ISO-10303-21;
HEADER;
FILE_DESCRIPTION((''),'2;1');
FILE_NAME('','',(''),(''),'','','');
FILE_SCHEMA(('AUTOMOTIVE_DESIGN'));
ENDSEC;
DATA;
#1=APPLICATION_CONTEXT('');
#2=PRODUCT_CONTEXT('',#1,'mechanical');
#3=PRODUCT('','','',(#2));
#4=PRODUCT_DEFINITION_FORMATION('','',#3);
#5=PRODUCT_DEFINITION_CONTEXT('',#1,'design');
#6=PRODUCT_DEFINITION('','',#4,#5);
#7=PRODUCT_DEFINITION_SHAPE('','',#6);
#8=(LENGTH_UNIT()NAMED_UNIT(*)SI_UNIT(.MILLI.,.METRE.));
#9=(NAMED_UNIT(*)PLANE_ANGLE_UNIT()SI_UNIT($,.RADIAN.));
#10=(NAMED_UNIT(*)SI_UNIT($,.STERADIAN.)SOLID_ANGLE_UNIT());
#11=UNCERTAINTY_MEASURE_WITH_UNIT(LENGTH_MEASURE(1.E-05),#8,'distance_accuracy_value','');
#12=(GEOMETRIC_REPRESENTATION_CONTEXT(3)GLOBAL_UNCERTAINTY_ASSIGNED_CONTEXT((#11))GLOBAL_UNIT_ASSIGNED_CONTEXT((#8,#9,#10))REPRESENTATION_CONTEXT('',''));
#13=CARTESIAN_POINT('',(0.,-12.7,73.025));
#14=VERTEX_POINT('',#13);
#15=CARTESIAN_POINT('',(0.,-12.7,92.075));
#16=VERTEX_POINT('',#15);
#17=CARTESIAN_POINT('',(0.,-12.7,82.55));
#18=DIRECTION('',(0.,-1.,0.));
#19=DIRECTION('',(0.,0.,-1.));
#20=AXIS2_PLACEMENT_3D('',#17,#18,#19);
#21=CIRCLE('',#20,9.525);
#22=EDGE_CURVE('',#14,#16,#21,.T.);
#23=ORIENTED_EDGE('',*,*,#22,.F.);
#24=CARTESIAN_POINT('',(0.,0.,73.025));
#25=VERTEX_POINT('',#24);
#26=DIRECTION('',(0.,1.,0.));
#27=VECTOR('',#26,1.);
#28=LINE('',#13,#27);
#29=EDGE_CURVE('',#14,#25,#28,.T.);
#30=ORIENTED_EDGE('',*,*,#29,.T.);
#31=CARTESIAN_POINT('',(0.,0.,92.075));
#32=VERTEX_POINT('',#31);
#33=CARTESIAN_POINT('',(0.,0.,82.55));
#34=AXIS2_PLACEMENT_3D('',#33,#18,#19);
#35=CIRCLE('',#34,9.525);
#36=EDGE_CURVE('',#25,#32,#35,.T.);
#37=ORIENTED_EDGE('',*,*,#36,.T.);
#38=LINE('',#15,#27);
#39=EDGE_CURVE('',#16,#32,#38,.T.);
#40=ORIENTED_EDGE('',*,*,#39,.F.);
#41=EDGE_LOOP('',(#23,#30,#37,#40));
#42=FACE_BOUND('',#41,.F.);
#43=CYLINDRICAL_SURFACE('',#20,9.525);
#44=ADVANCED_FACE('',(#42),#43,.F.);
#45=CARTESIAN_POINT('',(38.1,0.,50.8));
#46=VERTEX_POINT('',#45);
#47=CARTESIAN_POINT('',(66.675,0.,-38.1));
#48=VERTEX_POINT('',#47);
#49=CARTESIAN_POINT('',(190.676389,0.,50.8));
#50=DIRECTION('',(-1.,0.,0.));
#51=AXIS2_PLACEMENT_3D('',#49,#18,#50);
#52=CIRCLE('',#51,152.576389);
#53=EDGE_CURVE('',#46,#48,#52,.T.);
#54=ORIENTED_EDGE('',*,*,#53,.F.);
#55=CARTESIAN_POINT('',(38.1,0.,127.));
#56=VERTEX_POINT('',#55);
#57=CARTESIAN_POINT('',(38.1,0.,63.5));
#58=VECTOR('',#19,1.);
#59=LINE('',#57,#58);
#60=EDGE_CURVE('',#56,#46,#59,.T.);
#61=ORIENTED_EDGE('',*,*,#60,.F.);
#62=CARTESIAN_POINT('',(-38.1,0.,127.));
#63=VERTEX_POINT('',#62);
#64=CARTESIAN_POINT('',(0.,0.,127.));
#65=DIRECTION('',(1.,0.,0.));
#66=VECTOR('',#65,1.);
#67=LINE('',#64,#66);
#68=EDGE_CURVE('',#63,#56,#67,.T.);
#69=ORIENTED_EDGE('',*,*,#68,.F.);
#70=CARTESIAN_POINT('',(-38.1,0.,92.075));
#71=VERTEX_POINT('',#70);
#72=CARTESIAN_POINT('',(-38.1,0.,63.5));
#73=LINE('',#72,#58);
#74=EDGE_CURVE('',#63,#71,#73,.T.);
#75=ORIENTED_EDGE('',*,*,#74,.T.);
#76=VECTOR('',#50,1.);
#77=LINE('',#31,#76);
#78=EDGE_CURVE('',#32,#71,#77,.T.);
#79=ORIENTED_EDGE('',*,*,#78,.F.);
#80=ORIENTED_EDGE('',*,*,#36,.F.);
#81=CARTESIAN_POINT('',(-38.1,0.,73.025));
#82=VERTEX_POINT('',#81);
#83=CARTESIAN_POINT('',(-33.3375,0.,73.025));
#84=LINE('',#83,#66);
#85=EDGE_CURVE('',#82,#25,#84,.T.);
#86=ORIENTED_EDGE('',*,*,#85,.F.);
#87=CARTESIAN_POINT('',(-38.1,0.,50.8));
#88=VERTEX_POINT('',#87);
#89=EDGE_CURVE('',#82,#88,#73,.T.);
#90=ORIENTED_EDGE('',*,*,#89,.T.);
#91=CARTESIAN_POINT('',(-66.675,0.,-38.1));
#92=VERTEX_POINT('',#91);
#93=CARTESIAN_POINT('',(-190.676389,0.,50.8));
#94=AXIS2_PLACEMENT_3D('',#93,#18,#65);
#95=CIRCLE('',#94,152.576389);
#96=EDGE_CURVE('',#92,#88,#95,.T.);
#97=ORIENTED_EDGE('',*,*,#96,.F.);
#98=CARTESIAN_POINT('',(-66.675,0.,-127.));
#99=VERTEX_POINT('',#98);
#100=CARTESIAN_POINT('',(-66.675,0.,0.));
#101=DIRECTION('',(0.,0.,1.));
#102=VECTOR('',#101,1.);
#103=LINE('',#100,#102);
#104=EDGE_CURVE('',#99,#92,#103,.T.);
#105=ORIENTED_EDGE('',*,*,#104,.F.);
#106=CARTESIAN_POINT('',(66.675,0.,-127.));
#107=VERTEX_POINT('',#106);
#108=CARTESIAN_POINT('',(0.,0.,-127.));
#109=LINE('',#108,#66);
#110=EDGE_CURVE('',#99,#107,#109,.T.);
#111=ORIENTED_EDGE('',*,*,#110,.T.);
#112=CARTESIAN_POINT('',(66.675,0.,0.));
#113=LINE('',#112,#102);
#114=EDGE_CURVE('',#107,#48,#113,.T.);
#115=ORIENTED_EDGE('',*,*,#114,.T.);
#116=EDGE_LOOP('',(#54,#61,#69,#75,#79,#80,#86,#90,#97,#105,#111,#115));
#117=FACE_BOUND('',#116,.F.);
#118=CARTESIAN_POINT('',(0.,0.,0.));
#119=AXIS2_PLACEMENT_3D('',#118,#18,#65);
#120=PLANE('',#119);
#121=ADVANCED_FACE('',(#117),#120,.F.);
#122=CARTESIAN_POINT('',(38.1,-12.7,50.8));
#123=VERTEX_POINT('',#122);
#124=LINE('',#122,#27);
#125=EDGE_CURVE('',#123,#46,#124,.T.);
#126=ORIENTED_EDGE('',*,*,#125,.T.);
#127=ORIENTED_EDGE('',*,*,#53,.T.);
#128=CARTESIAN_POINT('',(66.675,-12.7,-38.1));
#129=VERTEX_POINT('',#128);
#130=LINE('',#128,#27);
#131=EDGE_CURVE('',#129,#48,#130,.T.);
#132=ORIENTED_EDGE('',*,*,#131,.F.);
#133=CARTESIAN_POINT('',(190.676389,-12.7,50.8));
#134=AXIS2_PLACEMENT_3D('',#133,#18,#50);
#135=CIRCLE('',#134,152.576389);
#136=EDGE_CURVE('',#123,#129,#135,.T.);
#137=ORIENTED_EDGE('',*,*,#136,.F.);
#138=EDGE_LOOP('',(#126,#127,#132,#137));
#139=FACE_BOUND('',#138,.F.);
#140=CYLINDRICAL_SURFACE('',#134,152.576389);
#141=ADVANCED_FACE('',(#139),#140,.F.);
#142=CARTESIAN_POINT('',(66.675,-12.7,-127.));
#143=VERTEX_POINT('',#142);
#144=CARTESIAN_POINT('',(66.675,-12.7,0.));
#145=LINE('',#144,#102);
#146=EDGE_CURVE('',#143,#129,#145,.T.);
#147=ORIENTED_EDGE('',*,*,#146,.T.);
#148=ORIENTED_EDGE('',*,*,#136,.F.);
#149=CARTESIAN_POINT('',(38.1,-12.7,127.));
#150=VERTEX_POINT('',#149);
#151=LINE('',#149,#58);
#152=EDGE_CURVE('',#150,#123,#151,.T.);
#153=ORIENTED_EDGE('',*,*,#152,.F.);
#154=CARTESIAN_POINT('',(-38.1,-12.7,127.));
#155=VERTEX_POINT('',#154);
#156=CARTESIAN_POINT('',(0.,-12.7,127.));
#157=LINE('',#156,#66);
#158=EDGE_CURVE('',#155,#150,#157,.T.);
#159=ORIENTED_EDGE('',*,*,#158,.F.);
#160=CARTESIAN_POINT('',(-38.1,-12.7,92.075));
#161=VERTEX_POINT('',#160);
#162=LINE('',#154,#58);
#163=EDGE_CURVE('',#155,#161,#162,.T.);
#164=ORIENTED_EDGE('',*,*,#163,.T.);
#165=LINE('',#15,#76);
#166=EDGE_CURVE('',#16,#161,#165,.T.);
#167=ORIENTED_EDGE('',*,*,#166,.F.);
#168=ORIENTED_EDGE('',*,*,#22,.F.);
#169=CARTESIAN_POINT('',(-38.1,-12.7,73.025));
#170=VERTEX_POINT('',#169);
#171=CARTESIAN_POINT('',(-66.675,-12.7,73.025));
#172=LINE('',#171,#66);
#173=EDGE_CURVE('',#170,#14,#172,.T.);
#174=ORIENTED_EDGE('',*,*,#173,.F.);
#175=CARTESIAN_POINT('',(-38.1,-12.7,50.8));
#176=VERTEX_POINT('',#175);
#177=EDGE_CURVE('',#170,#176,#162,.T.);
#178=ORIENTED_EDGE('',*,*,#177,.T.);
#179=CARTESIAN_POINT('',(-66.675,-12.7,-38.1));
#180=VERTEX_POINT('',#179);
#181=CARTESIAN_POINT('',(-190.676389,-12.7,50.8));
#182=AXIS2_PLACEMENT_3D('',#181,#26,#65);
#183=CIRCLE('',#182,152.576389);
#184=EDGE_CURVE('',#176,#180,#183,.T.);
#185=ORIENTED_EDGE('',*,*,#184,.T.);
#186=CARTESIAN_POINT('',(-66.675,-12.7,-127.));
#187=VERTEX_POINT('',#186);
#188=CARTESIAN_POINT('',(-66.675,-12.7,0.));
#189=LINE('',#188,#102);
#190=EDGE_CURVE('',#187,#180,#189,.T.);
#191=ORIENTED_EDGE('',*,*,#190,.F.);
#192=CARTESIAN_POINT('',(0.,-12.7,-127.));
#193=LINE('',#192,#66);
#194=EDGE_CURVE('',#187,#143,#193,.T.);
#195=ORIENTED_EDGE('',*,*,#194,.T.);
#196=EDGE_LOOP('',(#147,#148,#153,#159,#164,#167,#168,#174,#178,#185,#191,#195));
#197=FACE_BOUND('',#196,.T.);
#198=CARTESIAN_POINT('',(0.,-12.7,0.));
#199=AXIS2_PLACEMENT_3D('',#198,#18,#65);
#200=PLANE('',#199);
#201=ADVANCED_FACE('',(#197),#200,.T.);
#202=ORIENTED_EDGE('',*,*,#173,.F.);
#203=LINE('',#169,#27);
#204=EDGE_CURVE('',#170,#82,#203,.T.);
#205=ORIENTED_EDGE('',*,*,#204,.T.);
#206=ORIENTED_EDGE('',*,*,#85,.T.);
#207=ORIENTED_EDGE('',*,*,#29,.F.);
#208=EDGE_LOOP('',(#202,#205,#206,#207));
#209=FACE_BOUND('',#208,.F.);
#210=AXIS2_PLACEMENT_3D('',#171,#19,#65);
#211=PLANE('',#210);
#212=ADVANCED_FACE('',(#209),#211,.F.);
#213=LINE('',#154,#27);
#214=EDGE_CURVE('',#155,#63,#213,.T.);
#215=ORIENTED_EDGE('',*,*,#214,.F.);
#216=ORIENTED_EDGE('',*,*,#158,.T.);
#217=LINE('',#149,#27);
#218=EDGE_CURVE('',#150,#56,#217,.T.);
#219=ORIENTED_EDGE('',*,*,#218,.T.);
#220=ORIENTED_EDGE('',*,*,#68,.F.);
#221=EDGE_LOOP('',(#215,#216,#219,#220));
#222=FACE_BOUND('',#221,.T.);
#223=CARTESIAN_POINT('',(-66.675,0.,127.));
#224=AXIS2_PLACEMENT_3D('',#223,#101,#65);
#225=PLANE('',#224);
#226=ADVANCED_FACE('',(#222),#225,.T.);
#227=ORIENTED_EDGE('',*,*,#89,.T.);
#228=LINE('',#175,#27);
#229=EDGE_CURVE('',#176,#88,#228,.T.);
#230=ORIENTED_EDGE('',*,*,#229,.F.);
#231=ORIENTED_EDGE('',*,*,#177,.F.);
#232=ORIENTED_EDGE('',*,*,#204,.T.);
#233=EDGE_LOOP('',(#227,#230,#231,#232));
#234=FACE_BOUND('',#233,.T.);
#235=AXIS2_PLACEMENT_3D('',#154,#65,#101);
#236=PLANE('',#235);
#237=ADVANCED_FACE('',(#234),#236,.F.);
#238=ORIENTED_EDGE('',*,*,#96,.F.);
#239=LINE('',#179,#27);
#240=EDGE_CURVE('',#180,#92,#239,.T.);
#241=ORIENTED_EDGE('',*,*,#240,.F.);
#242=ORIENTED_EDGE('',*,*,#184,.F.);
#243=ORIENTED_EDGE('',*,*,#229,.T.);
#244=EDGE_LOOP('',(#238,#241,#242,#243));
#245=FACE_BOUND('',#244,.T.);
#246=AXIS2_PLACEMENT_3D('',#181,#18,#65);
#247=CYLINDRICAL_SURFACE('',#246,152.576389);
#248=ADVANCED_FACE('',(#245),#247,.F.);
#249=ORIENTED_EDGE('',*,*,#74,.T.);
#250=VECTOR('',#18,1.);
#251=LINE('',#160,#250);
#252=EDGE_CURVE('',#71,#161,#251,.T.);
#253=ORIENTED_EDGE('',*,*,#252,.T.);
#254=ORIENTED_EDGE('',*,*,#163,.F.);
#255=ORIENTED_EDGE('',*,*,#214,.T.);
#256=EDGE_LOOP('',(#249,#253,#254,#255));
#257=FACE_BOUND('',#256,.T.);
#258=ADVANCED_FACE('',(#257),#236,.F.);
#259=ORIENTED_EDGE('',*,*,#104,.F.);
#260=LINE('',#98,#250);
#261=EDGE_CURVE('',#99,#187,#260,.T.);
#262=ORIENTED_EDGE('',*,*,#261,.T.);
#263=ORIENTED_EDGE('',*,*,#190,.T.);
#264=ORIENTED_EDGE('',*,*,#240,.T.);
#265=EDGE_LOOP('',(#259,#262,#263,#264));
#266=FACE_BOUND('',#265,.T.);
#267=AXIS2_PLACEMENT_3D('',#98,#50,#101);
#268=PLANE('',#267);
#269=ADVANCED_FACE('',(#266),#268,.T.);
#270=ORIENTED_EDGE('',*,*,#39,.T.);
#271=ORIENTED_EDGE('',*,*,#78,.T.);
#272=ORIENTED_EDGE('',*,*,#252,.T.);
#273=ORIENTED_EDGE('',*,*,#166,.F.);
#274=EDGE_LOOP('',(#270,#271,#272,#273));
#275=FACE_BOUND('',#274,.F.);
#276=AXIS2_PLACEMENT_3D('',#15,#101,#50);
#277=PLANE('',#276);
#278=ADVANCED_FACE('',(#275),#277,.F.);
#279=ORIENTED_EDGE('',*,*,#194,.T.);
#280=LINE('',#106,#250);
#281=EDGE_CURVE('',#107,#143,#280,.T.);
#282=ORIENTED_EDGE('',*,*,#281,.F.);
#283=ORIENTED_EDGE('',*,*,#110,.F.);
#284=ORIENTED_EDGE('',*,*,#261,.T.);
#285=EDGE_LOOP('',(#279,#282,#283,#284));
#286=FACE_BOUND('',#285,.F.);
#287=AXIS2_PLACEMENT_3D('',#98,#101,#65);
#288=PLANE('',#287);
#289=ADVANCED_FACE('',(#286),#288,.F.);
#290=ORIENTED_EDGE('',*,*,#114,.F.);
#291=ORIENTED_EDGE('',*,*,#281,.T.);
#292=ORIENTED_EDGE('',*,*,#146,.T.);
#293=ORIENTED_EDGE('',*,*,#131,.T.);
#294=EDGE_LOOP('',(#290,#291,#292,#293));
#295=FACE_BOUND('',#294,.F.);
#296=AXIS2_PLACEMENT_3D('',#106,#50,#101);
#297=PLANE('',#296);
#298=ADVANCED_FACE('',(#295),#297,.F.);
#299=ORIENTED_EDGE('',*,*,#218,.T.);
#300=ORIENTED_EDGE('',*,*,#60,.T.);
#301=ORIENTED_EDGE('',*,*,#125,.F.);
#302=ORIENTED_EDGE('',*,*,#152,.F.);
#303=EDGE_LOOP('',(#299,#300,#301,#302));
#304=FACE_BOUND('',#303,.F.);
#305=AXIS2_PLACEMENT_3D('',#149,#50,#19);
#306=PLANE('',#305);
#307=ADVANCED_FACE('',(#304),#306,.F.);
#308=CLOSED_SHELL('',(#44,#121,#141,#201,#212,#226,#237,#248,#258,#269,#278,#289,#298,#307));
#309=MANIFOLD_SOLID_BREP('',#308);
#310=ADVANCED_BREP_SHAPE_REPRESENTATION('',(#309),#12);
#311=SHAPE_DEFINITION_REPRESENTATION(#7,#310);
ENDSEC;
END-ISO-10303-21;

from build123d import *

# Parameters (mm, degrees)
F0_W     = 133.35
F0_H     = 254
F1_DEPTH = 12.7
F3_DEPTH = 294
F5_DEPTH = 12.701


# Not quite as in the source:
# - an extrude ends at something that could not be found from the text; its depth is read off the source's solid
# - a pattern or mirror of a feature is missing from the dataset's text; its kind, count and spacing are read off the source's solid


with BuildPart() as f1:
    # F0 (on Front) → F1 (new body)
    with BuildSketch(Plane.XZ):
        Rectangle(F0_W, F0_H)
    extrude(amount=F1_DEPTH)

    # F0 (on Front) + F2 (on face) → F3 (cut, through all)
    with BuildSketch(Plane.XZ):
        Rectangle(F0_W, F0_H)
    with BuildSketch(Plane.XZ.offset(12.7)):
        with BuildLine():
            Line((-66.675, 73.025), (0, 73.025))
            ThreePointArc((0, 73.025), (9.525, 82.55), (0, 92.075))
            Line((0, 92.075), (-66.675, 92.075))
            Line((-66.675, 92.075), (-66.675, 73.025))
        make_face()
    extrude(amount=-F3_DEPTH, mode=Mode.SUBTRACT)

    # F4 (on face) → F5 (cut, through all)
    with BuildSketch(Plane.XZ.offset(12.7)):
        with BuildLine():
            Line((66.675, 127), (38.1, 127))
            Line((38.1, 127), (38.1, 50.8))
            ThreePointArc((38.1, 50.8), (45.4193088889, 4.1102242857), (66.675, -38.1))
            Line((66.675, -38.1), (66.675, 127))
        make_face()
    f5 = extrude(amount=-F5_DEPTH, mode=Mode.SUBTRACT)

    # F5_copies: F5 across plane
    add(f5.mirror(Plane(origin=(0, 0, 0), x_dir=(0, 0, -1), z_dir=(-1, 0, 0))), mode=Mode.SUBTRACT)


solid = f1.part
